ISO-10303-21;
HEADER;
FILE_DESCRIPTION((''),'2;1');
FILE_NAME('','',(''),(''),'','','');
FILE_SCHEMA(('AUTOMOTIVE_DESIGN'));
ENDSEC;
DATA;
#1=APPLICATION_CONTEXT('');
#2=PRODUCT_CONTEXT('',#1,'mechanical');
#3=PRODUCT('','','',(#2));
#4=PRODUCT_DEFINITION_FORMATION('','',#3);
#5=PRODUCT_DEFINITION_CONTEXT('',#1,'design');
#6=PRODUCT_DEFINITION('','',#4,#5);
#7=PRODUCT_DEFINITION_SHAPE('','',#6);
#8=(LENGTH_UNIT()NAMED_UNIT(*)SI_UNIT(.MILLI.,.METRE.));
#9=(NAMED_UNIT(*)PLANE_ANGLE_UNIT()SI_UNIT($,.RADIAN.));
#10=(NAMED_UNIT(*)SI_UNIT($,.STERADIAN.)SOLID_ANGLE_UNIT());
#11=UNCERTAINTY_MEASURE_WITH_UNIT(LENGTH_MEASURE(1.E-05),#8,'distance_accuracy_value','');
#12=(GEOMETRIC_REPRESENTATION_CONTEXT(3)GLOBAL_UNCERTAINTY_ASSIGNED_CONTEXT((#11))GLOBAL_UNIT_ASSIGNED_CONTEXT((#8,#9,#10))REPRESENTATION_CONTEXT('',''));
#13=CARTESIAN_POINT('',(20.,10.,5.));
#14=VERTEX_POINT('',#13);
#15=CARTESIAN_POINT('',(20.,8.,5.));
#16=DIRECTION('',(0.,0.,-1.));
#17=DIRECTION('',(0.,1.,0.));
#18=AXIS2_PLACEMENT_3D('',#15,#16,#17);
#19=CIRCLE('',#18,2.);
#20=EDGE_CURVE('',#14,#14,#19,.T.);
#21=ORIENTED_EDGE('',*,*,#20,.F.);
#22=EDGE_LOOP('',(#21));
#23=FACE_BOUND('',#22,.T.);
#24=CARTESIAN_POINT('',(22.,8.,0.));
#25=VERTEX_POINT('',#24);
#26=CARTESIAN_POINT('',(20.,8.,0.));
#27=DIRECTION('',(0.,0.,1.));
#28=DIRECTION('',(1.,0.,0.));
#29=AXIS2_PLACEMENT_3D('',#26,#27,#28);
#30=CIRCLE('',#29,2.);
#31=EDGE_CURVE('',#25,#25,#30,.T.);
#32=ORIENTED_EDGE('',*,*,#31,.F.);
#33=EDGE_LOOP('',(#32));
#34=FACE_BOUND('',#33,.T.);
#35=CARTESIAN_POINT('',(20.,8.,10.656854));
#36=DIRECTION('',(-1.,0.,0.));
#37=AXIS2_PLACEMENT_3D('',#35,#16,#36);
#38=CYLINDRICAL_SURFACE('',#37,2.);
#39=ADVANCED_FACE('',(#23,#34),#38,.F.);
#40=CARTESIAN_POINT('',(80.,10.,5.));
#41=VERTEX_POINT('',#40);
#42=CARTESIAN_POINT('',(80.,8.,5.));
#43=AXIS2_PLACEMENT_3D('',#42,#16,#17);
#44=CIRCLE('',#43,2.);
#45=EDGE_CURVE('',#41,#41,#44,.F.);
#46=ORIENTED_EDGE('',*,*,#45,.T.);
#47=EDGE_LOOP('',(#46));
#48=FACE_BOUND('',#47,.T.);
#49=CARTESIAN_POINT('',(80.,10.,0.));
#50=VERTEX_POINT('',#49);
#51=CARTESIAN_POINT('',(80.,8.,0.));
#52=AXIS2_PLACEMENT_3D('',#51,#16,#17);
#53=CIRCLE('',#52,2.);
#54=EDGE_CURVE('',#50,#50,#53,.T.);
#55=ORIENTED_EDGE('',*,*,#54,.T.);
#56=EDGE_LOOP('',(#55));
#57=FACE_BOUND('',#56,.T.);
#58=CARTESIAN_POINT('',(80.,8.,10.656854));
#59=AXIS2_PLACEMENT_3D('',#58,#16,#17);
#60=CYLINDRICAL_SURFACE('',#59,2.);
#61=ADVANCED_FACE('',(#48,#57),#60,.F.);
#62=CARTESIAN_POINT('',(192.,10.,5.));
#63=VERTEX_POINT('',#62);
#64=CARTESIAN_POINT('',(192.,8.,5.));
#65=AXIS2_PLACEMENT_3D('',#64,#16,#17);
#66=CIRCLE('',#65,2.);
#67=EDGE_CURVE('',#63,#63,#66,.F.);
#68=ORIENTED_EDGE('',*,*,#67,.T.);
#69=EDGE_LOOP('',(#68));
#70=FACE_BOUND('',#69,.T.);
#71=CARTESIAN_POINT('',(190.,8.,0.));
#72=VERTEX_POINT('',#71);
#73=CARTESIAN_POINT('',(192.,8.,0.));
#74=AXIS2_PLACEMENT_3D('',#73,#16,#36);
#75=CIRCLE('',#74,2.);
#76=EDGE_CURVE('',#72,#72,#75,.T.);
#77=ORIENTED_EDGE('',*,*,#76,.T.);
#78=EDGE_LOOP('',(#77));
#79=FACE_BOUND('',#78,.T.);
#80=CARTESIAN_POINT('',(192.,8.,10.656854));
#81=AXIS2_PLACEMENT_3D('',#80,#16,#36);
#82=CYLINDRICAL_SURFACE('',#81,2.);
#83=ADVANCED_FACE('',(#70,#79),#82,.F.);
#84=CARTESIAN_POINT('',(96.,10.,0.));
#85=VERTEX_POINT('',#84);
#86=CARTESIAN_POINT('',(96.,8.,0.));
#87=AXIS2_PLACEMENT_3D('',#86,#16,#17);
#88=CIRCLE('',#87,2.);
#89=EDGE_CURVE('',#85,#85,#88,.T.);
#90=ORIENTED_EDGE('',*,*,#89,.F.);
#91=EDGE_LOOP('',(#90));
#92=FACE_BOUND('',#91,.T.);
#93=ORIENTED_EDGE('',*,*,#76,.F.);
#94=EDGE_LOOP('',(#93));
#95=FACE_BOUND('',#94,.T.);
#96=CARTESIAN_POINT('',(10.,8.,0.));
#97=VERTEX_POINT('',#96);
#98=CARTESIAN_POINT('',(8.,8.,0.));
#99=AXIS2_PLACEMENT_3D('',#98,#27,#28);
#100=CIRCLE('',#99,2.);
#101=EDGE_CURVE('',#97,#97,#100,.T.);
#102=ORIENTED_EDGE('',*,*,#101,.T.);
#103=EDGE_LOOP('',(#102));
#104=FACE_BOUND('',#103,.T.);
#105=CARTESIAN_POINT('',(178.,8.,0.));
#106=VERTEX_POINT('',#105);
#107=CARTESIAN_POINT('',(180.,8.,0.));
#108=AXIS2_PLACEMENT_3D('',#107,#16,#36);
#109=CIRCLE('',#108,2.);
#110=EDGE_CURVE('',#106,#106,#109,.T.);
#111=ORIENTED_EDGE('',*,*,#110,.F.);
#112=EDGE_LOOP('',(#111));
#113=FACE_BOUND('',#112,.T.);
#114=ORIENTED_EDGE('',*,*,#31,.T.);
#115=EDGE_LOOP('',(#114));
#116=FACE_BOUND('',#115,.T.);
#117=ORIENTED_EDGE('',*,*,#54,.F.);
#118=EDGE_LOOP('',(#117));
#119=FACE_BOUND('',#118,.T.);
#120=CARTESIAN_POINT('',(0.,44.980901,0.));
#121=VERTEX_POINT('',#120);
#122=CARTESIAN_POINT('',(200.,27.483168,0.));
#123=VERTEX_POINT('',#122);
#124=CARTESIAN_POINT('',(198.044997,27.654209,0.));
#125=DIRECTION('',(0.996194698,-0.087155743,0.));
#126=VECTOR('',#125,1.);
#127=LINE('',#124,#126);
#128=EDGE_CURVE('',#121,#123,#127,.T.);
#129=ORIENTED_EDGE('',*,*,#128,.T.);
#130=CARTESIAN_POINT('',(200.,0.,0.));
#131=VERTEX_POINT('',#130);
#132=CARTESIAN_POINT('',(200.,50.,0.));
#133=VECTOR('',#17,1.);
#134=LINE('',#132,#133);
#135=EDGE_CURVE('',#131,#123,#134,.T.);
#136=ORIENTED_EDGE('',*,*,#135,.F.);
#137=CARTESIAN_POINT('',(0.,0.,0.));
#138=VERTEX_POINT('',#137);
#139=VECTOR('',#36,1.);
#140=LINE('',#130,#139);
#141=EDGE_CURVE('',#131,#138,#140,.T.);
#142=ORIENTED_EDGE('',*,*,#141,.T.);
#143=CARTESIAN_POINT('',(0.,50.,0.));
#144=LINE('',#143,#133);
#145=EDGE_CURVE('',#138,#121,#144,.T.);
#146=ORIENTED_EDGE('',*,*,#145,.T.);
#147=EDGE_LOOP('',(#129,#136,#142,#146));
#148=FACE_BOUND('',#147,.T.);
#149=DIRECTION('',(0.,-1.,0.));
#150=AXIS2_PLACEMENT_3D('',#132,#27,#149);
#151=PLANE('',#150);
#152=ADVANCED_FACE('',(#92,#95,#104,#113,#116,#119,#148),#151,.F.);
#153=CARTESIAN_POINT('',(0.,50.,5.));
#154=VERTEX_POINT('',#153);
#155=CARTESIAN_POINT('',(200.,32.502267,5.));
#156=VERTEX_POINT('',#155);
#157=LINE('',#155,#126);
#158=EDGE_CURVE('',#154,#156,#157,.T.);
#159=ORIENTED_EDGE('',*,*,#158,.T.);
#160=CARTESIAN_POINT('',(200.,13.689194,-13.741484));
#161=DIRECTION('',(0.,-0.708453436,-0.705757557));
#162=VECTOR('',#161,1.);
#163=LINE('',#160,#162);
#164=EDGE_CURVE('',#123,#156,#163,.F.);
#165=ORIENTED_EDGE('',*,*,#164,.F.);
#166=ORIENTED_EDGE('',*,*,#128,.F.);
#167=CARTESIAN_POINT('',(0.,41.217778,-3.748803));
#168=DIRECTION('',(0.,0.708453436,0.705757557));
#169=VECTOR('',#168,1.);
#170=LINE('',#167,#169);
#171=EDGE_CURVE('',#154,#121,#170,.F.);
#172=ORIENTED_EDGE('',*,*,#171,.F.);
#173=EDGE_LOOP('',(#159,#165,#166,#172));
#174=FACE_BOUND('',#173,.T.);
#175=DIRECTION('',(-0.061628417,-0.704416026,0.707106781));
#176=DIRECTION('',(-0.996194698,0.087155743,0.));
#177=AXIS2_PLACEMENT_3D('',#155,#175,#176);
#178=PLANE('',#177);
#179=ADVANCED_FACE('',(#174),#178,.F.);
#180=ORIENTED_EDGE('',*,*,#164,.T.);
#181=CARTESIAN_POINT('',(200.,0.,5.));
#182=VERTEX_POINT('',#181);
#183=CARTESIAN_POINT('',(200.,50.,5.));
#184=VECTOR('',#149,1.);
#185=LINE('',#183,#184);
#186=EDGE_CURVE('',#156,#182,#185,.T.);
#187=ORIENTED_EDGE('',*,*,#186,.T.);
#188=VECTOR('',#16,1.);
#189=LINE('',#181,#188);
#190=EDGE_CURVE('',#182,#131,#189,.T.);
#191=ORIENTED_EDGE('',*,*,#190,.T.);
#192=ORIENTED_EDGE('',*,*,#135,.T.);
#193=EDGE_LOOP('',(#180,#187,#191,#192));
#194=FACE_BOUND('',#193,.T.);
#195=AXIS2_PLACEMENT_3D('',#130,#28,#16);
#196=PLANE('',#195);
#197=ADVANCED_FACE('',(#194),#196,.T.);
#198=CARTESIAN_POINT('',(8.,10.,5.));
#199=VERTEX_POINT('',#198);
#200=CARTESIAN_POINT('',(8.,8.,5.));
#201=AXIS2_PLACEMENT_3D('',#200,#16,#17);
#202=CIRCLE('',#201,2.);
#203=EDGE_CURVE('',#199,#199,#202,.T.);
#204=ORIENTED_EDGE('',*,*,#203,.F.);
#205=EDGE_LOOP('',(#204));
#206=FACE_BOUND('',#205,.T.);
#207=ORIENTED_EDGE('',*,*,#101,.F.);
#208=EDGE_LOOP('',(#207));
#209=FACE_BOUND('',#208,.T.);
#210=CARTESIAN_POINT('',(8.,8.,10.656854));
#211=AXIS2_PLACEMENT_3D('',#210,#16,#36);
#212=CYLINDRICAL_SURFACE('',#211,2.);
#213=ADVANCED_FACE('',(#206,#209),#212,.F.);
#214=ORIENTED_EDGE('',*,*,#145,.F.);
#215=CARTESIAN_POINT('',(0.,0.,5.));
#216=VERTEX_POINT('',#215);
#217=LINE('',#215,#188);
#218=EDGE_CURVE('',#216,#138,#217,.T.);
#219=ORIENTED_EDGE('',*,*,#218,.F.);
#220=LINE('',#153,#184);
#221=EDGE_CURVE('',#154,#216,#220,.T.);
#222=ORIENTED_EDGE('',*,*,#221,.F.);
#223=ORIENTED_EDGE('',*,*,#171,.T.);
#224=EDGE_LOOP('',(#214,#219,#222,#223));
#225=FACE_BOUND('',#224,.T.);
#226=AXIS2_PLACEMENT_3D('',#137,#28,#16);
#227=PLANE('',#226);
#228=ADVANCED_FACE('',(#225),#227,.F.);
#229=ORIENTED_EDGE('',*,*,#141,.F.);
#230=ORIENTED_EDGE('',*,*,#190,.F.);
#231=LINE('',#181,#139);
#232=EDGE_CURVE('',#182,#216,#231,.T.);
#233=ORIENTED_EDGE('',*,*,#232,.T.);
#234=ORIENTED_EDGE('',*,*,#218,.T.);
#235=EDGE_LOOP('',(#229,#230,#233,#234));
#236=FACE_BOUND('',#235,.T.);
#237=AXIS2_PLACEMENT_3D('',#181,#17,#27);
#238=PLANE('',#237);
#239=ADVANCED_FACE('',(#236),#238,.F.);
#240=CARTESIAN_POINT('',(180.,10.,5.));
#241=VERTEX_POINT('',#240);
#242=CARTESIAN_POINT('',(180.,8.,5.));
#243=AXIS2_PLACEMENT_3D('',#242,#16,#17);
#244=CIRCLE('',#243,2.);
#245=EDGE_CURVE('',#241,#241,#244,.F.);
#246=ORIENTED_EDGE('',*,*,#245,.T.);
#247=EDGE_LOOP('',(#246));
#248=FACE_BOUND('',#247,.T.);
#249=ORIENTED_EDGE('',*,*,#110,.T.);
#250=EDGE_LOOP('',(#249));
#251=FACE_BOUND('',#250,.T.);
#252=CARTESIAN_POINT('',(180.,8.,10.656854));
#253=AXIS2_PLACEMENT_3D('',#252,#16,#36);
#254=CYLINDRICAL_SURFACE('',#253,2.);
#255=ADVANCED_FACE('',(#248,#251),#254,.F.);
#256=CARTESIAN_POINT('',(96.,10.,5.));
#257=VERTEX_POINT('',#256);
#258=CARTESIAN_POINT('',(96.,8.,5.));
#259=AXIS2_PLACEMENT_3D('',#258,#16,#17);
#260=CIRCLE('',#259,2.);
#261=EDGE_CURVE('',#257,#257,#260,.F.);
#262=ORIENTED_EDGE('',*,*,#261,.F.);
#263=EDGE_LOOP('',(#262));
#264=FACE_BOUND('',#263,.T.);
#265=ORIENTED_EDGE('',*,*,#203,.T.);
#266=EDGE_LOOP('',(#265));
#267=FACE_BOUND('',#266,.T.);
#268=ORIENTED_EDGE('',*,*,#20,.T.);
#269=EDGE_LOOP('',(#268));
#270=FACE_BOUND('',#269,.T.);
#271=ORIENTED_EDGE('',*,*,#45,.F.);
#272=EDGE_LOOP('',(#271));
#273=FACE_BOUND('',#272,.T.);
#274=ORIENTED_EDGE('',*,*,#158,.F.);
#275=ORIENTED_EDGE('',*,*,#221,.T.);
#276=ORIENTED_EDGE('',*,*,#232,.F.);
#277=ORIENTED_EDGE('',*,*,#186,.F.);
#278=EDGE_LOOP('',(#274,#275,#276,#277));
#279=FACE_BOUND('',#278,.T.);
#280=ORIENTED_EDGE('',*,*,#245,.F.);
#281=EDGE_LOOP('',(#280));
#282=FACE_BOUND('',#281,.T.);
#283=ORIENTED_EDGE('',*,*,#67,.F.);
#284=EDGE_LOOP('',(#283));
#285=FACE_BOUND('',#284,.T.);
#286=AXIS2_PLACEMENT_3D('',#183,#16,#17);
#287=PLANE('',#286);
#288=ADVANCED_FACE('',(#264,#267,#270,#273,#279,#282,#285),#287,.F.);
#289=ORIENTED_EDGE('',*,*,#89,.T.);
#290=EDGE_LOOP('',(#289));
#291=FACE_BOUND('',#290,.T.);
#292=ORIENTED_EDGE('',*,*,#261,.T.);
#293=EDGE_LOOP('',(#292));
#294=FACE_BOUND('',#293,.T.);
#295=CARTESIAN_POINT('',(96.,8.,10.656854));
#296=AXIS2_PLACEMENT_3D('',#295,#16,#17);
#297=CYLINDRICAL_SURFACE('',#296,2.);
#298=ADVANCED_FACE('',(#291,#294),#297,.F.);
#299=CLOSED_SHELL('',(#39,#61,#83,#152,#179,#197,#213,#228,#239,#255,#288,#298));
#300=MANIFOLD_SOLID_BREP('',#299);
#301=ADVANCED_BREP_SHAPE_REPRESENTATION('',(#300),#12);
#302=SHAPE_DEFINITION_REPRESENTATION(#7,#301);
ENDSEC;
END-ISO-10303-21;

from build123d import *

# Parameters (mm, degrees)
SKETCH1_W           = 5
SKETCH1_H           = 50
BOSS_EXTRUDE1_DEPTH = 200
CUT_EXTRUDE2_DEPTH  = 5
CHAMFER1_SIZE       = 5
SKETCH2_R           = 2
CUT_EXTRUDE1_DEPTH  = 5
SKETCH4_R           = 2
CUT_EXTRUDE3_DEPTH  = 5


with BuildPart() as part:
    # Sketch1 → Boss-Extrude1 (new body)
    with BuildSketch(Plane(origin=(0, 0, 0), x_dir=(0, 0, -1), z_dir=(1, 0, 0))):
        with Locations((-2.5, 25)):
            Rectangle(SKETCH1_W, SKETCH1_H)
    extrude(amount=BOSS_EXTRUDE1_DEPTH)

    # Sketch3 → Cut-Extrude2 (cut)
    with BuildSketch(Plane.XY.offset(5)):
        Polygon((0, 50), (200, 50), (200, 32.502267295), align=None)
    extrude(amount=-CUT_EXTRUDE2_DEPTH, mode=Mode.SUBTRACT)

    # Chamfer1
    chamfer1_edges = [part.edges().sort_by_distance(p)[0] for p in [
        (100, 41.251133647, 0),
    ]]
    chamfer(chamfer1_edges, length=CHAMFER1_SIZE - 0.0001)  # a hair under: the kernel refuses the full size

    # Sketch2 → Cut-Extrude1 (cut)
    with BuildSketch(Plane(origin=(0, 0, 0), x_dir=(-1, 0, 0), z_dir=(0, 0, -1))):
        with Locations((-192, 8)):
            Circle(SKETCH2_R)
        with Locations((-180, 8)):
            Circle(SKETCH2_R)
    cut_extrude1 = extrude(amount=-CUT_EXTRUDE1_DEPTH, mode=Mode.SUBTRACT)

    # Mirror2: Cut-Extrude1 across plane
    add(cut_extrude1.mirror(Plane(origin=(100, 0, 0), x_dir=(0, 0, 1), z_dir=(1, 0, 0))), mode=Mode.SUBTRACT)

    # Sketch4 → Cut-Extrude3 (cut)
    with BuildSketch(Plane(origin=(0, 0, 0), x_dir=(-1, 0, 0), z_dir=(0, 0, -1))):
        with Locations(Location((-80, 8, 0), (0, 0, 90))):
            Circle(SKETCH4_R)
        with Locations(Location((-96, 8, 0), (0, 0, 90))):
            Circle(SKETCH4_R)
    extrude(amount=-CUT_EXTRUDE3_DEPTH, mode=Mode.SUBTRACT)


solid = part.part
